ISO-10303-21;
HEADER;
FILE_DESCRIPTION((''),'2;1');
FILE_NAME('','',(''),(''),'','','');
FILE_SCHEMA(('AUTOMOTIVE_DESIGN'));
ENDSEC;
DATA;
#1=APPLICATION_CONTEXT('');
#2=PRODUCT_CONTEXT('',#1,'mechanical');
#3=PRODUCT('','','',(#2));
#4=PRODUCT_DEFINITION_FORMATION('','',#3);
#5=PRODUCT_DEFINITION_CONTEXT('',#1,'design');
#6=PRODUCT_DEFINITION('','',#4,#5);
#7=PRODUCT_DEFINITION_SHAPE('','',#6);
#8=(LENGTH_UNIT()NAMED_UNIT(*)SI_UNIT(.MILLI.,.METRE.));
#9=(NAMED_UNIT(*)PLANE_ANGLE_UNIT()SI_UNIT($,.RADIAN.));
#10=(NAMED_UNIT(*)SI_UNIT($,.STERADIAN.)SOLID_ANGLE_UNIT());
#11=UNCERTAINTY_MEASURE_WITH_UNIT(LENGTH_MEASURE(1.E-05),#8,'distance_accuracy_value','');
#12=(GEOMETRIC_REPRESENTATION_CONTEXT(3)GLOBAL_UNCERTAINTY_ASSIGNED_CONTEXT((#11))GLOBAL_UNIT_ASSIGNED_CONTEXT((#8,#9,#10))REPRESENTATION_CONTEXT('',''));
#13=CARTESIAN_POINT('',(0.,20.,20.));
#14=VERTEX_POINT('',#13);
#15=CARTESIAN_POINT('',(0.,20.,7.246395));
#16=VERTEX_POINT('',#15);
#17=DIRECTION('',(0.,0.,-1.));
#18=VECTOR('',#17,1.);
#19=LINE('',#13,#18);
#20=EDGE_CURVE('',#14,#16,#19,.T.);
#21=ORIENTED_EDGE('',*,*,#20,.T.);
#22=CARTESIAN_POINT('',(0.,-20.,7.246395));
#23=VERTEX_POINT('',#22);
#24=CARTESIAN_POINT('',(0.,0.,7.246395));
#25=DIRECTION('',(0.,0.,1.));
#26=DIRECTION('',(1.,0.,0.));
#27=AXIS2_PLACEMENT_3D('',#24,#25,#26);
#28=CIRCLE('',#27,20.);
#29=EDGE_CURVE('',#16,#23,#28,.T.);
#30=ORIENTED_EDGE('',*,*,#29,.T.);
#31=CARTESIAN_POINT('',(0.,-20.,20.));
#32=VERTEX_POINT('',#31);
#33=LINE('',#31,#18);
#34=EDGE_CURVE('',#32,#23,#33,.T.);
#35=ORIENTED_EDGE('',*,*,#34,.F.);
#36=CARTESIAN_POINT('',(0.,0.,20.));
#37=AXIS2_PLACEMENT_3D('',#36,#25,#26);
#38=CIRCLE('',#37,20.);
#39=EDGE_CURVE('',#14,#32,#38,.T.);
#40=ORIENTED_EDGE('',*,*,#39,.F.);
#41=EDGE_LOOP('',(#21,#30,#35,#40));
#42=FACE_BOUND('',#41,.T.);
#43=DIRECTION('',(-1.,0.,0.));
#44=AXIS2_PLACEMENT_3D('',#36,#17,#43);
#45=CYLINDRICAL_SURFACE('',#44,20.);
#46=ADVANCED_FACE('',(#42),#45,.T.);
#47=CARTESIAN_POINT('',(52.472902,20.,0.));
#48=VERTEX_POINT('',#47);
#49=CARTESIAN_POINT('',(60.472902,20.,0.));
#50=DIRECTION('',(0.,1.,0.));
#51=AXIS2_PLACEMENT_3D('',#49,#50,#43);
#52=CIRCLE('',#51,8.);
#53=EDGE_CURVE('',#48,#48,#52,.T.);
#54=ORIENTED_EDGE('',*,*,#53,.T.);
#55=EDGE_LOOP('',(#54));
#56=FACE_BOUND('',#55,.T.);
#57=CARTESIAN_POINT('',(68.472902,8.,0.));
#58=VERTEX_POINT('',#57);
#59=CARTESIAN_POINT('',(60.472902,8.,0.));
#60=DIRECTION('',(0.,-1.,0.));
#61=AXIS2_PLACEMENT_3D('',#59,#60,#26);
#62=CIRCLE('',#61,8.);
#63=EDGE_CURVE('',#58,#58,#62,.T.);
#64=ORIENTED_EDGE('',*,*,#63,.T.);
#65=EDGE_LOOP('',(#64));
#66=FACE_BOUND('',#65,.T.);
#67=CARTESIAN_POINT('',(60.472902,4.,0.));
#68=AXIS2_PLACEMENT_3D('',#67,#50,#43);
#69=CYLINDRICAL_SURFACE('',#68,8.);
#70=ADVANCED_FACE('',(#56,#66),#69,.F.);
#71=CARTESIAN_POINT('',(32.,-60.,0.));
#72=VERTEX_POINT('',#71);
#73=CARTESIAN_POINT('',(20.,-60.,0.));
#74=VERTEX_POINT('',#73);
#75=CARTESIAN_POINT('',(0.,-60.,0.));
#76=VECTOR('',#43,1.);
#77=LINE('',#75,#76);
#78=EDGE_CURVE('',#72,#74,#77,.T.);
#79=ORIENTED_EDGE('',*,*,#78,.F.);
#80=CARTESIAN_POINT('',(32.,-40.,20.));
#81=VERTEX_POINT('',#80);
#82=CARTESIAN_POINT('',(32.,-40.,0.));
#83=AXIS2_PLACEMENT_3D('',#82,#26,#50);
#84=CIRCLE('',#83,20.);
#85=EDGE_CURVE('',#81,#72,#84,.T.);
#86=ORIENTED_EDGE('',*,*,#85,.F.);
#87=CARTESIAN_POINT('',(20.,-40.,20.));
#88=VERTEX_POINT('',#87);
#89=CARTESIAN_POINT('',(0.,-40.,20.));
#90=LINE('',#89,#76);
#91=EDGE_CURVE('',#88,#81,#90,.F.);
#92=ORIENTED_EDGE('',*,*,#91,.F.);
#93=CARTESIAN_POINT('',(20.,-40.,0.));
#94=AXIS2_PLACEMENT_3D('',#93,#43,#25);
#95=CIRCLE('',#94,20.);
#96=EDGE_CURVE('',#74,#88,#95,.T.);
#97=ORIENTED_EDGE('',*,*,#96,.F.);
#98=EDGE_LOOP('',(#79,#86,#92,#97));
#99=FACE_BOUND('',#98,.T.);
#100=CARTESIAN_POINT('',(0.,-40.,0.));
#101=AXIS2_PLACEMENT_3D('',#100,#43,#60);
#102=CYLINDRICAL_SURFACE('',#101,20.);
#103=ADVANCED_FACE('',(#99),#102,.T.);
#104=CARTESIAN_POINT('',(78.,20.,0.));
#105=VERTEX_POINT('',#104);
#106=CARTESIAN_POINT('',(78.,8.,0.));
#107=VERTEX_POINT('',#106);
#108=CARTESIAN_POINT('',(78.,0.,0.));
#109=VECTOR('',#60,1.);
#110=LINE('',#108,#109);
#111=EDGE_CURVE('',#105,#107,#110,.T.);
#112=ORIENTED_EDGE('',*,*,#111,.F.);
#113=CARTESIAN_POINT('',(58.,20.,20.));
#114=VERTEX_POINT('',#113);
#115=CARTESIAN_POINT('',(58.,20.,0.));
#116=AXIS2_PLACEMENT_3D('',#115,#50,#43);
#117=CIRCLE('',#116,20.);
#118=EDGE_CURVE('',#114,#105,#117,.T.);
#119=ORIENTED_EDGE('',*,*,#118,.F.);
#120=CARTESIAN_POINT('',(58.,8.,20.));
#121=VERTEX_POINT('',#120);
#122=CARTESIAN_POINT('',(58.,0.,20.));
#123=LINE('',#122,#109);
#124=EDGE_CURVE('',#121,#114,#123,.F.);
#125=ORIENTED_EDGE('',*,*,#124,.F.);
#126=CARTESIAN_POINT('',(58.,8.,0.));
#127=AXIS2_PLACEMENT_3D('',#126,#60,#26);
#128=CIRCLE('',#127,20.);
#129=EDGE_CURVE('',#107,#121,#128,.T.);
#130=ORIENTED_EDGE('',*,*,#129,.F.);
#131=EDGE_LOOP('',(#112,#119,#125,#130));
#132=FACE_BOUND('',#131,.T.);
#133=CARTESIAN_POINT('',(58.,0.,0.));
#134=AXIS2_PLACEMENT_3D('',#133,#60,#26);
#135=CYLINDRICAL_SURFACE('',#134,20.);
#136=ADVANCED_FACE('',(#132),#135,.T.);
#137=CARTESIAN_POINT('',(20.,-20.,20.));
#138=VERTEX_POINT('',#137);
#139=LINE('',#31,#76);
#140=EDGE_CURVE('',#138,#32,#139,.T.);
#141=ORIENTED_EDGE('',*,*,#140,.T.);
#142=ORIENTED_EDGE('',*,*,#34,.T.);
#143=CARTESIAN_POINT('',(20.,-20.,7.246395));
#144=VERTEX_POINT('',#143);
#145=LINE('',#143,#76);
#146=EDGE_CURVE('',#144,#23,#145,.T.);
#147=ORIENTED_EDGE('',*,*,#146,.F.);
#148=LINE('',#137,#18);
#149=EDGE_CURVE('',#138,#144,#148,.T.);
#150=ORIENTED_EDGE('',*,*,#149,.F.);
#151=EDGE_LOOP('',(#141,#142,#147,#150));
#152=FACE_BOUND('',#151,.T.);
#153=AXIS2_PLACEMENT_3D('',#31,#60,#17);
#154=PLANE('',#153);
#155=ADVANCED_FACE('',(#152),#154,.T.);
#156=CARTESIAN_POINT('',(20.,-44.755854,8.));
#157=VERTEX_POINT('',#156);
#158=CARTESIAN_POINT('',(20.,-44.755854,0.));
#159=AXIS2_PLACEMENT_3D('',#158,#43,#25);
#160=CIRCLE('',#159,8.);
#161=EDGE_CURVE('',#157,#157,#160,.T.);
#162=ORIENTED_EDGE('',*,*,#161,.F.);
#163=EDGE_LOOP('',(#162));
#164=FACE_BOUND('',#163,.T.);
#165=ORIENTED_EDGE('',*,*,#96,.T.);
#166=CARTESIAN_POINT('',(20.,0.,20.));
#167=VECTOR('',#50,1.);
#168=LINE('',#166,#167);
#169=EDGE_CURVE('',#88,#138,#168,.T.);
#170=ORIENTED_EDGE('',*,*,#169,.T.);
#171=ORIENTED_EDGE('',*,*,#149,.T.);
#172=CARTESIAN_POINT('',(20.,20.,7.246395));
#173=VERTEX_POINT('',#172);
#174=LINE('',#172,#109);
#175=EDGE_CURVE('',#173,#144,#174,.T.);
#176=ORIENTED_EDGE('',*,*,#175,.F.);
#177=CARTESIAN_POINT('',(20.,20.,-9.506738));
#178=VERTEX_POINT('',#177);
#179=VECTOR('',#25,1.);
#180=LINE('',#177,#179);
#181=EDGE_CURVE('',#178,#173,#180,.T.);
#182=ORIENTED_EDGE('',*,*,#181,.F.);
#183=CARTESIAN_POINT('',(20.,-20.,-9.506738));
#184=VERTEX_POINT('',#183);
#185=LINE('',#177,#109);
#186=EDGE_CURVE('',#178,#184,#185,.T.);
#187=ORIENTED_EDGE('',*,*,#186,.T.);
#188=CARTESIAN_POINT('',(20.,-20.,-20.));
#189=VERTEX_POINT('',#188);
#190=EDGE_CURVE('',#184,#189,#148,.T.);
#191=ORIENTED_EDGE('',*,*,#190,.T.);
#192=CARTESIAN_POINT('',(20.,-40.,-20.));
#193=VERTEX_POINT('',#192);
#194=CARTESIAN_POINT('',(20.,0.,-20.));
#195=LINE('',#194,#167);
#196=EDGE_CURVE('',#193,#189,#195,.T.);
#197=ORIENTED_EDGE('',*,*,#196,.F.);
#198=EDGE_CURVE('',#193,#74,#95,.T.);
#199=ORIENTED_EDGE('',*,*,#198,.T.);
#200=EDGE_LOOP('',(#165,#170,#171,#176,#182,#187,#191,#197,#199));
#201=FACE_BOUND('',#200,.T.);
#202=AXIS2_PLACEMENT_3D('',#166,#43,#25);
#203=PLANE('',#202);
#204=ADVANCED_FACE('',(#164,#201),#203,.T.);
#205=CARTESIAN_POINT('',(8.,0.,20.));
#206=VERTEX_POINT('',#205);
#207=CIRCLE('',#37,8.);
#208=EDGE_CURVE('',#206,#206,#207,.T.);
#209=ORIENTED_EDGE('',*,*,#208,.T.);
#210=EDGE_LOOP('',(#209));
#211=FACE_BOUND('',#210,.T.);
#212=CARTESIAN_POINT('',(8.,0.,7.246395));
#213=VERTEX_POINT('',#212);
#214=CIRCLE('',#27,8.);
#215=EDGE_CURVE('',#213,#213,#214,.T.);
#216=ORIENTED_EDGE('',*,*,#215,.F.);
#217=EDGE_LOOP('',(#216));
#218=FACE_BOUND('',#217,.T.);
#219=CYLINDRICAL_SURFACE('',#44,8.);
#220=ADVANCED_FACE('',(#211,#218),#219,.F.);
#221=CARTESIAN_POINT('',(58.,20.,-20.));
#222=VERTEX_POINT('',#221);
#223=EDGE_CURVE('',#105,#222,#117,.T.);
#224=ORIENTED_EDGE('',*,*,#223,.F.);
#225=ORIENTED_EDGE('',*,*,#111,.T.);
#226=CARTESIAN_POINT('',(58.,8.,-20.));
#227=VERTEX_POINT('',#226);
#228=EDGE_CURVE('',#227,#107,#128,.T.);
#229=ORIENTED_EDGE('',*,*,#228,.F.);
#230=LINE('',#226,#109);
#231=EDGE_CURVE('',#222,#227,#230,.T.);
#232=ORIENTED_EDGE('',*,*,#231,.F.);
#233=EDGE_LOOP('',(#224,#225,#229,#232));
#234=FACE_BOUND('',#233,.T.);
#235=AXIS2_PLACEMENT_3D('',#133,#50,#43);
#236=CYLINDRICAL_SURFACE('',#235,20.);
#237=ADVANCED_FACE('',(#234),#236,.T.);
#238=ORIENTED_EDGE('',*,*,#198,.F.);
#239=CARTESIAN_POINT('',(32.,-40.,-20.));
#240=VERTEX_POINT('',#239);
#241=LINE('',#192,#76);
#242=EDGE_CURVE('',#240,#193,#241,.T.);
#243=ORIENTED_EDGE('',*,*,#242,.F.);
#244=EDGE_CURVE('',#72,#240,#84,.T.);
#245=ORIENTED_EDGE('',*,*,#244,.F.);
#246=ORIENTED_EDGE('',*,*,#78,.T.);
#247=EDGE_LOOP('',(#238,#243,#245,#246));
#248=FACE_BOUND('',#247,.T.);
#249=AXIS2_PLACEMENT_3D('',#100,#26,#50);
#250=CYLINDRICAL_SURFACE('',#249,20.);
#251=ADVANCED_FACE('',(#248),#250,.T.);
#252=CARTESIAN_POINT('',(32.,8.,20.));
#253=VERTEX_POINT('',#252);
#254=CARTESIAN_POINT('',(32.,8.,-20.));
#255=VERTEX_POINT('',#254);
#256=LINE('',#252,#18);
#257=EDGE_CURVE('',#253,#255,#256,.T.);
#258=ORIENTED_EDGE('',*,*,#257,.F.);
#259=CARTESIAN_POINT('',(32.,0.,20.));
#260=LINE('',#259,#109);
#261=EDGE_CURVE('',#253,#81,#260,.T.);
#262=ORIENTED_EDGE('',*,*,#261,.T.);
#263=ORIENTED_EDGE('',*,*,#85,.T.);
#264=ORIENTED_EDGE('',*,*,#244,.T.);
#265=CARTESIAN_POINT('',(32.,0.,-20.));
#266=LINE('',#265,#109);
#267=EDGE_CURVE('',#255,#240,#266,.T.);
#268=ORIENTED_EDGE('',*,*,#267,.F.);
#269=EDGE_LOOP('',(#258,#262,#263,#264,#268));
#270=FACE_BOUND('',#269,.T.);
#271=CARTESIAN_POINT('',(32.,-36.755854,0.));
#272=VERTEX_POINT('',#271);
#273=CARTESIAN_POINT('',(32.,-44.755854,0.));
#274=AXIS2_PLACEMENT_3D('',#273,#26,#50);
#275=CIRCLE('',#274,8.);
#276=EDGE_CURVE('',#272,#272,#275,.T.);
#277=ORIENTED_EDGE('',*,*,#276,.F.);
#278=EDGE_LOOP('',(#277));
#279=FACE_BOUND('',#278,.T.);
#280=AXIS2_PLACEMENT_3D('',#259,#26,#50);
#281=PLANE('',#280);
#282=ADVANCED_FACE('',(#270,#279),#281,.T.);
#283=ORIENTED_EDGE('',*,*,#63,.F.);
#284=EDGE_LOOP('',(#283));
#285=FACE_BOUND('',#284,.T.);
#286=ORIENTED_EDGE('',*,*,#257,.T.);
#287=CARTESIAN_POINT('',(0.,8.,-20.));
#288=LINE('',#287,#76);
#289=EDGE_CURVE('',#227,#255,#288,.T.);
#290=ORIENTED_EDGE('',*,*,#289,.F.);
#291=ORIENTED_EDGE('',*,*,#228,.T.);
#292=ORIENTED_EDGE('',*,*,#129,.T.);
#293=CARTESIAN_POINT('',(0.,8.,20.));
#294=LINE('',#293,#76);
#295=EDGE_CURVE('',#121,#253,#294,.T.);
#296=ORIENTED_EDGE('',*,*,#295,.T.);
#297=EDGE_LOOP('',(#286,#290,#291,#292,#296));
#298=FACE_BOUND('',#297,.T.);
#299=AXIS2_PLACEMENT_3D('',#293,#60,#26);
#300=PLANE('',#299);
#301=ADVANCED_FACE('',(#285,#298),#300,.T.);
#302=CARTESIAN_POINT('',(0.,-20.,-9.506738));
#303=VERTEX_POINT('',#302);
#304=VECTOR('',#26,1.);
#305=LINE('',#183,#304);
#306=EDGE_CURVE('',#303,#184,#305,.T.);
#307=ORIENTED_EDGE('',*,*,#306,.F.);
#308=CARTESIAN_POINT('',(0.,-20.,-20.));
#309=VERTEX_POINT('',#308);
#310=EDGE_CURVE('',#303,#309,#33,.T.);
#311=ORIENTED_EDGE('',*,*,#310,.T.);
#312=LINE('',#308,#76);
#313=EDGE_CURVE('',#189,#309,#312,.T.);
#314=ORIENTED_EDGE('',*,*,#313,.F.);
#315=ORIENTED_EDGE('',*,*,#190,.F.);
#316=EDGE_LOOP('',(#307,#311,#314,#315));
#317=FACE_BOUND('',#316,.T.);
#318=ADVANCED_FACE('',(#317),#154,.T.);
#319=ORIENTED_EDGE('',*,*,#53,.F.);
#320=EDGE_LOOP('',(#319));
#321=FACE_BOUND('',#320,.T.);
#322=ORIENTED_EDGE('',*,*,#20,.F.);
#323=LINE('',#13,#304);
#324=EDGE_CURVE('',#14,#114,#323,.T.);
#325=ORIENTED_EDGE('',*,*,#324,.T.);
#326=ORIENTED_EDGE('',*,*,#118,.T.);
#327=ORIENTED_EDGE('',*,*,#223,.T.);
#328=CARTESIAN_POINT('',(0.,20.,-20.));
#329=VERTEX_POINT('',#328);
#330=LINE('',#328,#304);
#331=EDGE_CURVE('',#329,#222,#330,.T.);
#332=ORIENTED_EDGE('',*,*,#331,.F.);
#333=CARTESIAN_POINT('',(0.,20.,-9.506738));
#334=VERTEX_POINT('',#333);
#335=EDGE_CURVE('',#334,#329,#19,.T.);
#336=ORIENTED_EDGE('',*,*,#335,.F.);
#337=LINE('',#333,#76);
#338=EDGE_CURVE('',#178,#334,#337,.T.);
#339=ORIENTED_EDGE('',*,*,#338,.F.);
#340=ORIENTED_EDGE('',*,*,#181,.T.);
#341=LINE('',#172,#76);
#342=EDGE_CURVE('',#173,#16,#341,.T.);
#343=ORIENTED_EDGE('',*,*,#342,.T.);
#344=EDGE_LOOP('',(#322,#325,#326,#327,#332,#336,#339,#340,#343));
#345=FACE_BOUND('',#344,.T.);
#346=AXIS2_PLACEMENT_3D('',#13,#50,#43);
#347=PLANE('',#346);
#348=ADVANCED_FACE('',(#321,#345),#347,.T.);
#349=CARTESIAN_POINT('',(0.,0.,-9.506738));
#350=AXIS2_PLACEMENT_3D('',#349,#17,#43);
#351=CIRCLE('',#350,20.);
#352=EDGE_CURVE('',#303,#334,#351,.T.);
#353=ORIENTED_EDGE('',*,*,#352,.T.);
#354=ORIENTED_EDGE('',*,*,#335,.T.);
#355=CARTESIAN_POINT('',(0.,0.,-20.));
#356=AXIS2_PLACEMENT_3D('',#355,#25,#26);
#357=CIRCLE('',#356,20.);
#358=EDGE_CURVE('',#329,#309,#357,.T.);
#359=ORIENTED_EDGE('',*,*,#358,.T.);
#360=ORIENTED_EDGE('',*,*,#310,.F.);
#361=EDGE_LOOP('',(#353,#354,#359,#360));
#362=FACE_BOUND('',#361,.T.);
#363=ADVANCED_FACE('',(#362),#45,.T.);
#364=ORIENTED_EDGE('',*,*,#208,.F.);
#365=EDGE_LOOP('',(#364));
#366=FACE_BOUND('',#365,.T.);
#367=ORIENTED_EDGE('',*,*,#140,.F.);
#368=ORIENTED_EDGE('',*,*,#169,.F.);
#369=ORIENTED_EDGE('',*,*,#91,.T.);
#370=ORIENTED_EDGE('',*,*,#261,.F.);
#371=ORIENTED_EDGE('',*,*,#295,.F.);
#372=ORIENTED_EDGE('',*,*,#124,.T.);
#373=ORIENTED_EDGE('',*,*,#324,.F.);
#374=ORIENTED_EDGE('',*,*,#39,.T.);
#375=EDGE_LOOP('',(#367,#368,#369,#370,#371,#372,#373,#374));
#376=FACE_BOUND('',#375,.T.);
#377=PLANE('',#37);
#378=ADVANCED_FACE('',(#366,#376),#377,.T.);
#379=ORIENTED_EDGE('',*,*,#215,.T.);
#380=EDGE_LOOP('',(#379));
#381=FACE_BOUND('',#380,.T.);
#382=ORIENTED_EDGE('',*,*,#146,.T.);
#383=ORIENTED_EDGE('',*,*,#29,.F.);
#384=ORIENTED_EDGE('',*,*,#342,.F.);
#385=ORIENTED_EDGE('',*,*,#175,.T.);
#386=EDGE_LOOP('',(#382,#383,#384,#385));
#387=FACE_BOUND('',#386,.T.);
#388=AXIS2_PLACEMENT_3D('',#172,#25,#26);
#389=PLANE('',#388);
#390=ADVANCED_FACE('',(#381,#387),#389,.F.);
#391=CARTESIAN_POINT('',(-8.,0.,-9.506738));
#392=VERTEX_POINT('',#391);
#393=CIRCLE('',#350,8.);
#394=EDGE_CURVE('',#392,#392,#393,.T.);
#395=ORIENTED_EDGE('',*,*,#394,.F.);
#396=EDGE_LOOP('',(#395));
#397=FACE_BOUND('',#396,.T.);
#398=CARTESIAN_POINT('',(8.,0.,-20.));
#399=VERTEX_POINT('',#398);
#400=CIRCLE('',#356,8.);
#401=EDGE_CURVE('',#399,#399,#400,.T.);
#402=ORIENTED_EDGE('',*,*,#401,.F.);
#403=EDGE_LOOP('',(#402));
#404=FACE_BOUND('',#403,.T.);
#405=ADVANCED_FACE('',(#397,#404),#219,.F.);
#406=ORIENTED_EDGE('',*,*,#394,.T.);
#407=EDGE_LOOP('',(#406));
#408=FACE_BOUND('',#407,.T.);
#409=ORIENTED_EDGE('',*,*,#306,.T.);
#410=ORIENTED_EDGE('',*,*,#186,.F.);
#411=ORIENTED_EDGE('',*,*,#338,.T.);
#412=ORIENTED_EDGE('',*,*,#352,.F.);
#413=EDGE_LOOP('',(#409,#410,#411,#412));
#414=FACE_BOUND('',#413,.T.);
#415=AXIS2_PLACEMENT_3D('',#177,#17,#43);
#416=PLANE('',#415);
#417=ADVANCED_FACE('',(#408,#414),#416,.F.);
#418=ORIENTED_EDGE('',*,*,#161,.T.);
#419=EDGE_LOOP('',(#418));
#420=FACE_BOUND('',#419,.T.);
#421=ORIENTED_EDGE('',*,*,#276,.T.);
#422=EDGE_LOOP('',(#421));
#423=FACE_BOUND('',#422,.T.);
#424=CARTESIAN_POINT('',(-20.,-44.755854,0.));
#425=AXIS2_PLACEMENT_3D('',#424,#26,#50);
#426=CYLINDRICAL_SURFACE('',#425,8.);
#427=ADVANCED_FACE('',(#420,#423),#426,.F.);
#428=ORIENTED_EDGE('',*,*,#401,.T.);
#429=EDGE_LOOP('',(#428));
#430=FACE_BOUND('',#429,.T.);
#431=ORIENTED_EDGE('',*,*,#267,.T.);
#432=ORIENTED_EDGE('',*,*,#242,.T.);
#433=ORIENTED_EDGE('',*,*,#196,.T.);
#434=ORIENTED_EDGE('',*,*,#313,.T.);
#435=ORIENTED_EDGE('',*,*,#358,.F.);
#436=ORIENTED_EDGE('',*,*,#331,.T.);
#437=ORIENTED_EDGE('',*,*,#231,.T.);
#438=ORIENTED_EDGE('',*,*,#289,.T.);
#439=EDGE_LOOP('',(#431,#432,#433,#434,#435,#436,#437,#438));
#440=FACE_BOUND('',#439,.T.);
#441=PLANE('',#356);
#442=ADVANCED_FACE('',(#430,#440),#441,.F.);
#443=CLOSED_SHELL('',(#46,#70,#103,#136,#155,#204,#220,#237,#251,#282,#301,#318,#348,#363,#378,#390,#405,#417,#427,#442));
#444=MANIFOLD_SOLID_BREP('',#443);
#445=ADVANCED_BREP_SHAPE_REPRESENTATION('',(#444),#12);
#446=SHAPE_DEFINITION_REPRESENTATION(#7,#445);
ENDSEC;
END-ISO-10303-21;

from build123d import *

# Parameters (mm, degrees)
SKETCH1_R               = 20
SKETCH1_R_2             = 8
BOSS_EXTRUDE1_DEPTH     = 20
FILLET1_R               = 20
SKETCH2_R               = 8
CUT_EXTRUDE2_DEPTH      = 16
SKETCH3_W               = 74.438735145
SKETCH3_H               = 16.753132604
CUT_EXTRUDE3_DEPTH      = 90.911067172
FILLET2_R               = 20
FILLET3_R               = 20
CUT_EXTRUDE4_DEPTH      = 82.877957962
CUT_EXTRUDE4_DEPTH_BACK = 82.877957962
SKETCH4_R               = 8


with BuildPart() as part:
    # Sketch1 → Boss-Extrude1 (new, symmetric)
    # profile 1 of 2: a face of its own
    with BuildSketch(Plane.XY):
        Circle(SKETCH1_R)
        Circle(SKETCH1_R_2, mode=Mode.SUBTRACT)
    # profile 2 of 2: a face of its own
    with BuildSketch(Plane.XY):
        with BuildLine():
            Line((78, 20), (0, 20))
            ThreePointArc((0, 20), (14.142135624, 14.142135624), (20, 0))
            ThreePointArc((20, 0), (14.142135624, -14.142135624), (0, -20))
            Line((0, -20), (20, -20))
            Line((20, -20), (20, -60))
            Line((20, -60), (32, -60))
            Line((32, -60), (32, 8))
            Line((32, 8), (78, 8))
            Line((78, 8), (78, 20))
        make_face()
    extrude(amount=BOSS_EXTRUDE1_DEPTH, both=True)

    # Fillet1
    fillet1_edges = [part.edges().sort_by_distance(p)[0] for p in [
        (78, 14, -20),
        (78, 14, 20),
    ]]
    fillet(fillet1_edges, radius=FILLET1_R - 0.0001)  # a hair under: the kernel refuses the full size

    # Sketch2 → Cut-Extrude2 (cut)
    with BuildSketch(Plane(origin=(0, 20, 0), x_dir=(1, 0, 0), z_dir=(0, 1, 0))):
        with Locations(Location((60.472902104, 0, 0), (0, 0, 180))):
            Circle(SKETCH2_R)
    extrude(amount=-CUT_EXTRUDE2_DEPTH, mode=Mode.SUBTRACT)

    # Sketch3 → Cut-Extrude3 (cut, through all)
    with BuildSketch(Plane.XZ.offset(20)):
        with Locations((-17.219367573, -1.130171644)):
            Rectangle(SKETCH3_W, SKETCH3_H)
    extrude(amount=-CUT_EXTRUDE3_DEPTH, mode=Mode.SUBTRACT)

    # Fillet2
    fillet2_edges = [part.edges().sort_by_distance(p)[0] for p in [
        (26, -60, 20),
    ]]
    fillet(fillet2_edges, radius=FILLET2_R)

    # Fillet3
    fillet3_edges = [part.edges().sort_by_distance(p)[0] for p in [
        (26, -60, -20),
    ]]
    fillet(fillet3_edges, radius=FILLET3_R - 0.0001)  # a hair under: the kernel refuses the full size

    # Sketch4 → Cut-Extrude4 (cut, two sides: drawn at the far end of the back side and taken through both)
    with BuildSketch(Plane(origin=(32, 0, 0), x_dir=(0, 0, -1), z_dir=(1, 0, 0)).offset(-CUT_EXTRUDE4_DEPTH_BACK)):
        with Locations(Location((0, -44.755854097, 0), (0, 0, 90))):
            Circle(SKETCH4_R)
    extrude(amount=CUT_EXTRUDE4_DEPTH + CUT_EXTRUDE4_DEPTH_BACK, mode=Mode.SUBTRACT)


solid = part.part
